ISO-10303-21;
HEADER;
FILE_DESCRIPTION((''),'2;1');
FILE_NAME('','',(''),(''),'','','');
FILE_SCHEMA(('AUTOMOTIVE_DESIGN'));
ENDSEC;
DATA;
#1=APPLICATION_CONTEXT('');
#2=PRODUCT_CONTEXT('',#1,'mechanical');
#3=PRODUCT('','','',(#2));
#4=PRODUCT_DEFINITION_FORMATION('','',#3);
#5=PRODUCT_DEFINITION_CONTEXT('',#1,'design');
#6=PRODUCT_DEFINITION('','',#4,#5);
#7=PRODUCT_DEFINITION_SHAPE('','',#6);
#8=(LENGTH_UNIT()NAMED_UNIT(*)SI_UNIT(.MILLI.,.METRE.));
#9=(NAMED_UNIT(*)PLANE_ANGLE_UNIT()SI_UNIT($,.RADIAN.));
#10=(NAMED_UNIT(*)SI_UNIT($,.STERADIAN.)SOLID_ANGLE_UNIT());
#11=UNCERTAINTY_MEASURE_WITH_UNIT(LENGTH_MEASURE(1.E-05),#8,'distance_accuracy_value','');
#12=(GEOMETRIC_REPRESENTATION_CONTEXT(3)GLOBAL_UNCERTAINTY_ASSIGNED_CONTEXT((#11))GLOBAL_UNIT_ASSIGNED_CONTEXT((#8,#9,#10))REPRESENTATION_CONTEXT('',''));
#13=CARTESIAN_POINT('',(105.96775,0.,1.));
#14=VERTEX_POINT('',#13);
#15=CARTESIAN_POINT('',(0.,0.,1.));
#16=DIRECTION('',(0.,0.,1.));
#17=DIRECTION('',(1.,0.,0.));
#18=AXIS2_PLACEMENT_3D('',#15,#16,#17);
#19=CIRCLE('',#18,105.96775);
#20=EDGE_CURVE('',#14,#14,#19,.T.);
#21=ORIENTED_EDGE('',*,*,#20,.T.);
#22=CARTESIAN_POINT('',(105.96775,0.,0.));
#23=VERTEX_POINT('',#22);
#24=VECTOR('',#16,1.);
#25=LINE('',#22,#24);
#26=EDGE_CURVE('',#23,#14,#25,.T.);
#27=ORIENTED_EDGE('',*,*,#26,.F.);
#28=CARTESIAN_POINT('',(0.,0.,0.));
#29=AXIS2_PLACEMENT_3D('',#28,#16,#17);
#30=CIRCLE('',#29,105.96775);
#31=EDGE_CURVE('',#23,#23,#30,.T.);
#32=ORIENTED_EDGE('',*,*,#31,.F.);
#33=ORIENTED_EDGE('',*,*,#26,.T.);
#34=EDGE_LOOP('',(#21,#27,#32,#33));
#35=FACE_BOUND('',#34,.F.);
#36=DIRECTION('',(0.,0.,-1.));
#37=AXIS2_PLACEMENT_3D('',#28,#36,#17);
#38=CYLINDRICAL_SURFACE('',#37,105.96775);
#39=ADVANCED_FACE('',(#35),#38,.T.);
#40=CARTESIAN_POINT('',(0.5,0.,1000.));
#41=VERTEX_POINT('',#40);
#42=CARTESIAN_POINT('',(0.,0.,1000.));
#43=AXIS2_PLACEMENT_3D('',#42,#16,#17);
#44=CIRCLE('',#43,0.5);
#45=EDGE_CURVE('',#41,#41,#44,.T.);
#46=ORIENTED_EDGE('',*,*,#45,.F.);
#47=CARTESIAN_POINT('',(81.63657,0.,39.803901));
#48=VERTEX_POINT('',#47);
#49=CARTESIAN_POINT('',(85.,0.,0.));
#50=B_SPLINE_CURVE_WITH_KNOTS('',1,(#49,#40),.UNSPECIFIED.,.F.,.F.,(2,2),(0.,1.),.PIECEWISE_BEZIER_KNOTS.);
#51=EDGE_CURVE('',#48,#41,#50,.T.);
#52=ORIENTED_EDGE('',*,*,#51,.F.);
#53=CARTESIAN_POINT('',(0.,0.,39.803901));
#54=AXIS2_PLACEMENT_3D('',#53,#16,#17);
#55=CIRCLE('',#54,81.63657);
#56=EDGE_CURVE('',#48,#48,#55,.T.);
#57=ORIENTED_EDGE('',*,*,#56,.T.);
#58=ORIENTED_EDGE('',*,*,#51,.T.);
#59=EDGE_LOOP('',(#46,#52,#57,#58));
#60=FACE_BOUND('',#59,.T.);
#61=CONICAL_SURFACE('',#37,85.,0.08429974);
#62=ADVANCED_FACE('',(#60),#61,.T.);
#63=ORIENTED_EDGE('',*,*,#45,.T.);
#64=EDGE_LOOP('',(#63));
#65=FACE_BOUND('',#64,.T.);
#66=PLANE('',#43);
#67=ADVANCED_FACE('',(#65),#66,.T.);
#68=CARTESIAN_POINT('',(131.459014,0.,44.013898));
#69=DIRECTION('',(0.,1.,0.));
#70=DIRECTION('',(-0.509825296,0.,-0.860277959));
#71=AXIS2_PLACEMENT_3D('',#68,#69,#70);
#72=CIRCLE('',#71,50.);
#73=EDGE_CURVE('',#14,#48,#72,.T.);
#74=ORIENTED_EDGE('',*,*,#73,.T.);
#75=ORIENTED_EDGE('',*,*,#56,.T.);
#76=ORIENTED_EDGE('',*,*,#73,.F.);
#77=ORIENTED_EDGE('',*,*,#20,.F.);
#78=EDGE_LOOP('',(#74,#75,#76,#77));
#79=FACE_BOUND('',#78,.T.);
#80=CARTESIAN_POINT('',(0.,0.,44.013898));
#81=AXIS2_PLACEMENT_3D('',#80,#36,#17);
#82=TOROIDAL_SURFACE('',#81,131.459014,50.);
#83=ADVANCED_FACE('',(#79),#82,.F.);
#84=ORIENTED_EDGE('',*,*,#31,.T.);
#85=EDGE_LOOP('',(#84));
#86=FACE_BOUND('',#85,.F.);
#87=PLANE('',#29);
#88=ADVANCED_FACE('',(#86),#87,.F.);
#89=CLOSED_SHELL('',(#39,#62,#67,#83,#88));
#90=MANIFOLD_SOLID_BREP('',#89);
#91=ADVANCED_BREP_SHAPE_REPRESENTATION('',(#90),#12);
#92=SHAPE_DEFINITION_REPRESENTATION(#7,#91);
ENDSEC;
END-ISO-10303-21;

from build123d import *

# Parameters (mm, degrees)
F0_R     = 85
F2_R     = 0.5
F4_R     = 105.9677495378
F5_DEPTH = 1


# Not quite as in the source:
# - a fillet or chamfer that OpenCascade refuses, or shapes differently, is made with other operations: its cross-section is extruded or revolved along the edge and cut away or added


with BuildPart() as f3:
    # F0 (on Top) → F3 section 0
    with BuildSketch(Plane.XY):
        Circle(F0_R)
    # F2 (on offset) → F3 section 1
    with BuildSketch(Plane.XY.offset(1000)):
        Circle(F2_R)
    loft()

    # F4 (on Top) → F5 (join)
    with BuildSketch(Plane.XY):
        Circle(F4_R)
    extrude(amount=F5_DEPTH)

    # F6: fillet of radius 50 on 1 edges, made by hand

    # F6_s1 → F6_t2 (revolve)
    with BuildSketch(Plane.XZ):
        with BuildLine():
            ThreePointArc((105.9677495378, 1), (89.0977776327, 17.4521656578), (81.6365703283, 39.8039014399))
            Line((81.6365703283, 39.8039014399), (84.9155, 1))
            Line((84.9155, 1), (105.9677495378, 1))
        make_face()
    revolve(axis=Axis((0, 0, 1), (0, 0, 1)))


solid = f3.part
